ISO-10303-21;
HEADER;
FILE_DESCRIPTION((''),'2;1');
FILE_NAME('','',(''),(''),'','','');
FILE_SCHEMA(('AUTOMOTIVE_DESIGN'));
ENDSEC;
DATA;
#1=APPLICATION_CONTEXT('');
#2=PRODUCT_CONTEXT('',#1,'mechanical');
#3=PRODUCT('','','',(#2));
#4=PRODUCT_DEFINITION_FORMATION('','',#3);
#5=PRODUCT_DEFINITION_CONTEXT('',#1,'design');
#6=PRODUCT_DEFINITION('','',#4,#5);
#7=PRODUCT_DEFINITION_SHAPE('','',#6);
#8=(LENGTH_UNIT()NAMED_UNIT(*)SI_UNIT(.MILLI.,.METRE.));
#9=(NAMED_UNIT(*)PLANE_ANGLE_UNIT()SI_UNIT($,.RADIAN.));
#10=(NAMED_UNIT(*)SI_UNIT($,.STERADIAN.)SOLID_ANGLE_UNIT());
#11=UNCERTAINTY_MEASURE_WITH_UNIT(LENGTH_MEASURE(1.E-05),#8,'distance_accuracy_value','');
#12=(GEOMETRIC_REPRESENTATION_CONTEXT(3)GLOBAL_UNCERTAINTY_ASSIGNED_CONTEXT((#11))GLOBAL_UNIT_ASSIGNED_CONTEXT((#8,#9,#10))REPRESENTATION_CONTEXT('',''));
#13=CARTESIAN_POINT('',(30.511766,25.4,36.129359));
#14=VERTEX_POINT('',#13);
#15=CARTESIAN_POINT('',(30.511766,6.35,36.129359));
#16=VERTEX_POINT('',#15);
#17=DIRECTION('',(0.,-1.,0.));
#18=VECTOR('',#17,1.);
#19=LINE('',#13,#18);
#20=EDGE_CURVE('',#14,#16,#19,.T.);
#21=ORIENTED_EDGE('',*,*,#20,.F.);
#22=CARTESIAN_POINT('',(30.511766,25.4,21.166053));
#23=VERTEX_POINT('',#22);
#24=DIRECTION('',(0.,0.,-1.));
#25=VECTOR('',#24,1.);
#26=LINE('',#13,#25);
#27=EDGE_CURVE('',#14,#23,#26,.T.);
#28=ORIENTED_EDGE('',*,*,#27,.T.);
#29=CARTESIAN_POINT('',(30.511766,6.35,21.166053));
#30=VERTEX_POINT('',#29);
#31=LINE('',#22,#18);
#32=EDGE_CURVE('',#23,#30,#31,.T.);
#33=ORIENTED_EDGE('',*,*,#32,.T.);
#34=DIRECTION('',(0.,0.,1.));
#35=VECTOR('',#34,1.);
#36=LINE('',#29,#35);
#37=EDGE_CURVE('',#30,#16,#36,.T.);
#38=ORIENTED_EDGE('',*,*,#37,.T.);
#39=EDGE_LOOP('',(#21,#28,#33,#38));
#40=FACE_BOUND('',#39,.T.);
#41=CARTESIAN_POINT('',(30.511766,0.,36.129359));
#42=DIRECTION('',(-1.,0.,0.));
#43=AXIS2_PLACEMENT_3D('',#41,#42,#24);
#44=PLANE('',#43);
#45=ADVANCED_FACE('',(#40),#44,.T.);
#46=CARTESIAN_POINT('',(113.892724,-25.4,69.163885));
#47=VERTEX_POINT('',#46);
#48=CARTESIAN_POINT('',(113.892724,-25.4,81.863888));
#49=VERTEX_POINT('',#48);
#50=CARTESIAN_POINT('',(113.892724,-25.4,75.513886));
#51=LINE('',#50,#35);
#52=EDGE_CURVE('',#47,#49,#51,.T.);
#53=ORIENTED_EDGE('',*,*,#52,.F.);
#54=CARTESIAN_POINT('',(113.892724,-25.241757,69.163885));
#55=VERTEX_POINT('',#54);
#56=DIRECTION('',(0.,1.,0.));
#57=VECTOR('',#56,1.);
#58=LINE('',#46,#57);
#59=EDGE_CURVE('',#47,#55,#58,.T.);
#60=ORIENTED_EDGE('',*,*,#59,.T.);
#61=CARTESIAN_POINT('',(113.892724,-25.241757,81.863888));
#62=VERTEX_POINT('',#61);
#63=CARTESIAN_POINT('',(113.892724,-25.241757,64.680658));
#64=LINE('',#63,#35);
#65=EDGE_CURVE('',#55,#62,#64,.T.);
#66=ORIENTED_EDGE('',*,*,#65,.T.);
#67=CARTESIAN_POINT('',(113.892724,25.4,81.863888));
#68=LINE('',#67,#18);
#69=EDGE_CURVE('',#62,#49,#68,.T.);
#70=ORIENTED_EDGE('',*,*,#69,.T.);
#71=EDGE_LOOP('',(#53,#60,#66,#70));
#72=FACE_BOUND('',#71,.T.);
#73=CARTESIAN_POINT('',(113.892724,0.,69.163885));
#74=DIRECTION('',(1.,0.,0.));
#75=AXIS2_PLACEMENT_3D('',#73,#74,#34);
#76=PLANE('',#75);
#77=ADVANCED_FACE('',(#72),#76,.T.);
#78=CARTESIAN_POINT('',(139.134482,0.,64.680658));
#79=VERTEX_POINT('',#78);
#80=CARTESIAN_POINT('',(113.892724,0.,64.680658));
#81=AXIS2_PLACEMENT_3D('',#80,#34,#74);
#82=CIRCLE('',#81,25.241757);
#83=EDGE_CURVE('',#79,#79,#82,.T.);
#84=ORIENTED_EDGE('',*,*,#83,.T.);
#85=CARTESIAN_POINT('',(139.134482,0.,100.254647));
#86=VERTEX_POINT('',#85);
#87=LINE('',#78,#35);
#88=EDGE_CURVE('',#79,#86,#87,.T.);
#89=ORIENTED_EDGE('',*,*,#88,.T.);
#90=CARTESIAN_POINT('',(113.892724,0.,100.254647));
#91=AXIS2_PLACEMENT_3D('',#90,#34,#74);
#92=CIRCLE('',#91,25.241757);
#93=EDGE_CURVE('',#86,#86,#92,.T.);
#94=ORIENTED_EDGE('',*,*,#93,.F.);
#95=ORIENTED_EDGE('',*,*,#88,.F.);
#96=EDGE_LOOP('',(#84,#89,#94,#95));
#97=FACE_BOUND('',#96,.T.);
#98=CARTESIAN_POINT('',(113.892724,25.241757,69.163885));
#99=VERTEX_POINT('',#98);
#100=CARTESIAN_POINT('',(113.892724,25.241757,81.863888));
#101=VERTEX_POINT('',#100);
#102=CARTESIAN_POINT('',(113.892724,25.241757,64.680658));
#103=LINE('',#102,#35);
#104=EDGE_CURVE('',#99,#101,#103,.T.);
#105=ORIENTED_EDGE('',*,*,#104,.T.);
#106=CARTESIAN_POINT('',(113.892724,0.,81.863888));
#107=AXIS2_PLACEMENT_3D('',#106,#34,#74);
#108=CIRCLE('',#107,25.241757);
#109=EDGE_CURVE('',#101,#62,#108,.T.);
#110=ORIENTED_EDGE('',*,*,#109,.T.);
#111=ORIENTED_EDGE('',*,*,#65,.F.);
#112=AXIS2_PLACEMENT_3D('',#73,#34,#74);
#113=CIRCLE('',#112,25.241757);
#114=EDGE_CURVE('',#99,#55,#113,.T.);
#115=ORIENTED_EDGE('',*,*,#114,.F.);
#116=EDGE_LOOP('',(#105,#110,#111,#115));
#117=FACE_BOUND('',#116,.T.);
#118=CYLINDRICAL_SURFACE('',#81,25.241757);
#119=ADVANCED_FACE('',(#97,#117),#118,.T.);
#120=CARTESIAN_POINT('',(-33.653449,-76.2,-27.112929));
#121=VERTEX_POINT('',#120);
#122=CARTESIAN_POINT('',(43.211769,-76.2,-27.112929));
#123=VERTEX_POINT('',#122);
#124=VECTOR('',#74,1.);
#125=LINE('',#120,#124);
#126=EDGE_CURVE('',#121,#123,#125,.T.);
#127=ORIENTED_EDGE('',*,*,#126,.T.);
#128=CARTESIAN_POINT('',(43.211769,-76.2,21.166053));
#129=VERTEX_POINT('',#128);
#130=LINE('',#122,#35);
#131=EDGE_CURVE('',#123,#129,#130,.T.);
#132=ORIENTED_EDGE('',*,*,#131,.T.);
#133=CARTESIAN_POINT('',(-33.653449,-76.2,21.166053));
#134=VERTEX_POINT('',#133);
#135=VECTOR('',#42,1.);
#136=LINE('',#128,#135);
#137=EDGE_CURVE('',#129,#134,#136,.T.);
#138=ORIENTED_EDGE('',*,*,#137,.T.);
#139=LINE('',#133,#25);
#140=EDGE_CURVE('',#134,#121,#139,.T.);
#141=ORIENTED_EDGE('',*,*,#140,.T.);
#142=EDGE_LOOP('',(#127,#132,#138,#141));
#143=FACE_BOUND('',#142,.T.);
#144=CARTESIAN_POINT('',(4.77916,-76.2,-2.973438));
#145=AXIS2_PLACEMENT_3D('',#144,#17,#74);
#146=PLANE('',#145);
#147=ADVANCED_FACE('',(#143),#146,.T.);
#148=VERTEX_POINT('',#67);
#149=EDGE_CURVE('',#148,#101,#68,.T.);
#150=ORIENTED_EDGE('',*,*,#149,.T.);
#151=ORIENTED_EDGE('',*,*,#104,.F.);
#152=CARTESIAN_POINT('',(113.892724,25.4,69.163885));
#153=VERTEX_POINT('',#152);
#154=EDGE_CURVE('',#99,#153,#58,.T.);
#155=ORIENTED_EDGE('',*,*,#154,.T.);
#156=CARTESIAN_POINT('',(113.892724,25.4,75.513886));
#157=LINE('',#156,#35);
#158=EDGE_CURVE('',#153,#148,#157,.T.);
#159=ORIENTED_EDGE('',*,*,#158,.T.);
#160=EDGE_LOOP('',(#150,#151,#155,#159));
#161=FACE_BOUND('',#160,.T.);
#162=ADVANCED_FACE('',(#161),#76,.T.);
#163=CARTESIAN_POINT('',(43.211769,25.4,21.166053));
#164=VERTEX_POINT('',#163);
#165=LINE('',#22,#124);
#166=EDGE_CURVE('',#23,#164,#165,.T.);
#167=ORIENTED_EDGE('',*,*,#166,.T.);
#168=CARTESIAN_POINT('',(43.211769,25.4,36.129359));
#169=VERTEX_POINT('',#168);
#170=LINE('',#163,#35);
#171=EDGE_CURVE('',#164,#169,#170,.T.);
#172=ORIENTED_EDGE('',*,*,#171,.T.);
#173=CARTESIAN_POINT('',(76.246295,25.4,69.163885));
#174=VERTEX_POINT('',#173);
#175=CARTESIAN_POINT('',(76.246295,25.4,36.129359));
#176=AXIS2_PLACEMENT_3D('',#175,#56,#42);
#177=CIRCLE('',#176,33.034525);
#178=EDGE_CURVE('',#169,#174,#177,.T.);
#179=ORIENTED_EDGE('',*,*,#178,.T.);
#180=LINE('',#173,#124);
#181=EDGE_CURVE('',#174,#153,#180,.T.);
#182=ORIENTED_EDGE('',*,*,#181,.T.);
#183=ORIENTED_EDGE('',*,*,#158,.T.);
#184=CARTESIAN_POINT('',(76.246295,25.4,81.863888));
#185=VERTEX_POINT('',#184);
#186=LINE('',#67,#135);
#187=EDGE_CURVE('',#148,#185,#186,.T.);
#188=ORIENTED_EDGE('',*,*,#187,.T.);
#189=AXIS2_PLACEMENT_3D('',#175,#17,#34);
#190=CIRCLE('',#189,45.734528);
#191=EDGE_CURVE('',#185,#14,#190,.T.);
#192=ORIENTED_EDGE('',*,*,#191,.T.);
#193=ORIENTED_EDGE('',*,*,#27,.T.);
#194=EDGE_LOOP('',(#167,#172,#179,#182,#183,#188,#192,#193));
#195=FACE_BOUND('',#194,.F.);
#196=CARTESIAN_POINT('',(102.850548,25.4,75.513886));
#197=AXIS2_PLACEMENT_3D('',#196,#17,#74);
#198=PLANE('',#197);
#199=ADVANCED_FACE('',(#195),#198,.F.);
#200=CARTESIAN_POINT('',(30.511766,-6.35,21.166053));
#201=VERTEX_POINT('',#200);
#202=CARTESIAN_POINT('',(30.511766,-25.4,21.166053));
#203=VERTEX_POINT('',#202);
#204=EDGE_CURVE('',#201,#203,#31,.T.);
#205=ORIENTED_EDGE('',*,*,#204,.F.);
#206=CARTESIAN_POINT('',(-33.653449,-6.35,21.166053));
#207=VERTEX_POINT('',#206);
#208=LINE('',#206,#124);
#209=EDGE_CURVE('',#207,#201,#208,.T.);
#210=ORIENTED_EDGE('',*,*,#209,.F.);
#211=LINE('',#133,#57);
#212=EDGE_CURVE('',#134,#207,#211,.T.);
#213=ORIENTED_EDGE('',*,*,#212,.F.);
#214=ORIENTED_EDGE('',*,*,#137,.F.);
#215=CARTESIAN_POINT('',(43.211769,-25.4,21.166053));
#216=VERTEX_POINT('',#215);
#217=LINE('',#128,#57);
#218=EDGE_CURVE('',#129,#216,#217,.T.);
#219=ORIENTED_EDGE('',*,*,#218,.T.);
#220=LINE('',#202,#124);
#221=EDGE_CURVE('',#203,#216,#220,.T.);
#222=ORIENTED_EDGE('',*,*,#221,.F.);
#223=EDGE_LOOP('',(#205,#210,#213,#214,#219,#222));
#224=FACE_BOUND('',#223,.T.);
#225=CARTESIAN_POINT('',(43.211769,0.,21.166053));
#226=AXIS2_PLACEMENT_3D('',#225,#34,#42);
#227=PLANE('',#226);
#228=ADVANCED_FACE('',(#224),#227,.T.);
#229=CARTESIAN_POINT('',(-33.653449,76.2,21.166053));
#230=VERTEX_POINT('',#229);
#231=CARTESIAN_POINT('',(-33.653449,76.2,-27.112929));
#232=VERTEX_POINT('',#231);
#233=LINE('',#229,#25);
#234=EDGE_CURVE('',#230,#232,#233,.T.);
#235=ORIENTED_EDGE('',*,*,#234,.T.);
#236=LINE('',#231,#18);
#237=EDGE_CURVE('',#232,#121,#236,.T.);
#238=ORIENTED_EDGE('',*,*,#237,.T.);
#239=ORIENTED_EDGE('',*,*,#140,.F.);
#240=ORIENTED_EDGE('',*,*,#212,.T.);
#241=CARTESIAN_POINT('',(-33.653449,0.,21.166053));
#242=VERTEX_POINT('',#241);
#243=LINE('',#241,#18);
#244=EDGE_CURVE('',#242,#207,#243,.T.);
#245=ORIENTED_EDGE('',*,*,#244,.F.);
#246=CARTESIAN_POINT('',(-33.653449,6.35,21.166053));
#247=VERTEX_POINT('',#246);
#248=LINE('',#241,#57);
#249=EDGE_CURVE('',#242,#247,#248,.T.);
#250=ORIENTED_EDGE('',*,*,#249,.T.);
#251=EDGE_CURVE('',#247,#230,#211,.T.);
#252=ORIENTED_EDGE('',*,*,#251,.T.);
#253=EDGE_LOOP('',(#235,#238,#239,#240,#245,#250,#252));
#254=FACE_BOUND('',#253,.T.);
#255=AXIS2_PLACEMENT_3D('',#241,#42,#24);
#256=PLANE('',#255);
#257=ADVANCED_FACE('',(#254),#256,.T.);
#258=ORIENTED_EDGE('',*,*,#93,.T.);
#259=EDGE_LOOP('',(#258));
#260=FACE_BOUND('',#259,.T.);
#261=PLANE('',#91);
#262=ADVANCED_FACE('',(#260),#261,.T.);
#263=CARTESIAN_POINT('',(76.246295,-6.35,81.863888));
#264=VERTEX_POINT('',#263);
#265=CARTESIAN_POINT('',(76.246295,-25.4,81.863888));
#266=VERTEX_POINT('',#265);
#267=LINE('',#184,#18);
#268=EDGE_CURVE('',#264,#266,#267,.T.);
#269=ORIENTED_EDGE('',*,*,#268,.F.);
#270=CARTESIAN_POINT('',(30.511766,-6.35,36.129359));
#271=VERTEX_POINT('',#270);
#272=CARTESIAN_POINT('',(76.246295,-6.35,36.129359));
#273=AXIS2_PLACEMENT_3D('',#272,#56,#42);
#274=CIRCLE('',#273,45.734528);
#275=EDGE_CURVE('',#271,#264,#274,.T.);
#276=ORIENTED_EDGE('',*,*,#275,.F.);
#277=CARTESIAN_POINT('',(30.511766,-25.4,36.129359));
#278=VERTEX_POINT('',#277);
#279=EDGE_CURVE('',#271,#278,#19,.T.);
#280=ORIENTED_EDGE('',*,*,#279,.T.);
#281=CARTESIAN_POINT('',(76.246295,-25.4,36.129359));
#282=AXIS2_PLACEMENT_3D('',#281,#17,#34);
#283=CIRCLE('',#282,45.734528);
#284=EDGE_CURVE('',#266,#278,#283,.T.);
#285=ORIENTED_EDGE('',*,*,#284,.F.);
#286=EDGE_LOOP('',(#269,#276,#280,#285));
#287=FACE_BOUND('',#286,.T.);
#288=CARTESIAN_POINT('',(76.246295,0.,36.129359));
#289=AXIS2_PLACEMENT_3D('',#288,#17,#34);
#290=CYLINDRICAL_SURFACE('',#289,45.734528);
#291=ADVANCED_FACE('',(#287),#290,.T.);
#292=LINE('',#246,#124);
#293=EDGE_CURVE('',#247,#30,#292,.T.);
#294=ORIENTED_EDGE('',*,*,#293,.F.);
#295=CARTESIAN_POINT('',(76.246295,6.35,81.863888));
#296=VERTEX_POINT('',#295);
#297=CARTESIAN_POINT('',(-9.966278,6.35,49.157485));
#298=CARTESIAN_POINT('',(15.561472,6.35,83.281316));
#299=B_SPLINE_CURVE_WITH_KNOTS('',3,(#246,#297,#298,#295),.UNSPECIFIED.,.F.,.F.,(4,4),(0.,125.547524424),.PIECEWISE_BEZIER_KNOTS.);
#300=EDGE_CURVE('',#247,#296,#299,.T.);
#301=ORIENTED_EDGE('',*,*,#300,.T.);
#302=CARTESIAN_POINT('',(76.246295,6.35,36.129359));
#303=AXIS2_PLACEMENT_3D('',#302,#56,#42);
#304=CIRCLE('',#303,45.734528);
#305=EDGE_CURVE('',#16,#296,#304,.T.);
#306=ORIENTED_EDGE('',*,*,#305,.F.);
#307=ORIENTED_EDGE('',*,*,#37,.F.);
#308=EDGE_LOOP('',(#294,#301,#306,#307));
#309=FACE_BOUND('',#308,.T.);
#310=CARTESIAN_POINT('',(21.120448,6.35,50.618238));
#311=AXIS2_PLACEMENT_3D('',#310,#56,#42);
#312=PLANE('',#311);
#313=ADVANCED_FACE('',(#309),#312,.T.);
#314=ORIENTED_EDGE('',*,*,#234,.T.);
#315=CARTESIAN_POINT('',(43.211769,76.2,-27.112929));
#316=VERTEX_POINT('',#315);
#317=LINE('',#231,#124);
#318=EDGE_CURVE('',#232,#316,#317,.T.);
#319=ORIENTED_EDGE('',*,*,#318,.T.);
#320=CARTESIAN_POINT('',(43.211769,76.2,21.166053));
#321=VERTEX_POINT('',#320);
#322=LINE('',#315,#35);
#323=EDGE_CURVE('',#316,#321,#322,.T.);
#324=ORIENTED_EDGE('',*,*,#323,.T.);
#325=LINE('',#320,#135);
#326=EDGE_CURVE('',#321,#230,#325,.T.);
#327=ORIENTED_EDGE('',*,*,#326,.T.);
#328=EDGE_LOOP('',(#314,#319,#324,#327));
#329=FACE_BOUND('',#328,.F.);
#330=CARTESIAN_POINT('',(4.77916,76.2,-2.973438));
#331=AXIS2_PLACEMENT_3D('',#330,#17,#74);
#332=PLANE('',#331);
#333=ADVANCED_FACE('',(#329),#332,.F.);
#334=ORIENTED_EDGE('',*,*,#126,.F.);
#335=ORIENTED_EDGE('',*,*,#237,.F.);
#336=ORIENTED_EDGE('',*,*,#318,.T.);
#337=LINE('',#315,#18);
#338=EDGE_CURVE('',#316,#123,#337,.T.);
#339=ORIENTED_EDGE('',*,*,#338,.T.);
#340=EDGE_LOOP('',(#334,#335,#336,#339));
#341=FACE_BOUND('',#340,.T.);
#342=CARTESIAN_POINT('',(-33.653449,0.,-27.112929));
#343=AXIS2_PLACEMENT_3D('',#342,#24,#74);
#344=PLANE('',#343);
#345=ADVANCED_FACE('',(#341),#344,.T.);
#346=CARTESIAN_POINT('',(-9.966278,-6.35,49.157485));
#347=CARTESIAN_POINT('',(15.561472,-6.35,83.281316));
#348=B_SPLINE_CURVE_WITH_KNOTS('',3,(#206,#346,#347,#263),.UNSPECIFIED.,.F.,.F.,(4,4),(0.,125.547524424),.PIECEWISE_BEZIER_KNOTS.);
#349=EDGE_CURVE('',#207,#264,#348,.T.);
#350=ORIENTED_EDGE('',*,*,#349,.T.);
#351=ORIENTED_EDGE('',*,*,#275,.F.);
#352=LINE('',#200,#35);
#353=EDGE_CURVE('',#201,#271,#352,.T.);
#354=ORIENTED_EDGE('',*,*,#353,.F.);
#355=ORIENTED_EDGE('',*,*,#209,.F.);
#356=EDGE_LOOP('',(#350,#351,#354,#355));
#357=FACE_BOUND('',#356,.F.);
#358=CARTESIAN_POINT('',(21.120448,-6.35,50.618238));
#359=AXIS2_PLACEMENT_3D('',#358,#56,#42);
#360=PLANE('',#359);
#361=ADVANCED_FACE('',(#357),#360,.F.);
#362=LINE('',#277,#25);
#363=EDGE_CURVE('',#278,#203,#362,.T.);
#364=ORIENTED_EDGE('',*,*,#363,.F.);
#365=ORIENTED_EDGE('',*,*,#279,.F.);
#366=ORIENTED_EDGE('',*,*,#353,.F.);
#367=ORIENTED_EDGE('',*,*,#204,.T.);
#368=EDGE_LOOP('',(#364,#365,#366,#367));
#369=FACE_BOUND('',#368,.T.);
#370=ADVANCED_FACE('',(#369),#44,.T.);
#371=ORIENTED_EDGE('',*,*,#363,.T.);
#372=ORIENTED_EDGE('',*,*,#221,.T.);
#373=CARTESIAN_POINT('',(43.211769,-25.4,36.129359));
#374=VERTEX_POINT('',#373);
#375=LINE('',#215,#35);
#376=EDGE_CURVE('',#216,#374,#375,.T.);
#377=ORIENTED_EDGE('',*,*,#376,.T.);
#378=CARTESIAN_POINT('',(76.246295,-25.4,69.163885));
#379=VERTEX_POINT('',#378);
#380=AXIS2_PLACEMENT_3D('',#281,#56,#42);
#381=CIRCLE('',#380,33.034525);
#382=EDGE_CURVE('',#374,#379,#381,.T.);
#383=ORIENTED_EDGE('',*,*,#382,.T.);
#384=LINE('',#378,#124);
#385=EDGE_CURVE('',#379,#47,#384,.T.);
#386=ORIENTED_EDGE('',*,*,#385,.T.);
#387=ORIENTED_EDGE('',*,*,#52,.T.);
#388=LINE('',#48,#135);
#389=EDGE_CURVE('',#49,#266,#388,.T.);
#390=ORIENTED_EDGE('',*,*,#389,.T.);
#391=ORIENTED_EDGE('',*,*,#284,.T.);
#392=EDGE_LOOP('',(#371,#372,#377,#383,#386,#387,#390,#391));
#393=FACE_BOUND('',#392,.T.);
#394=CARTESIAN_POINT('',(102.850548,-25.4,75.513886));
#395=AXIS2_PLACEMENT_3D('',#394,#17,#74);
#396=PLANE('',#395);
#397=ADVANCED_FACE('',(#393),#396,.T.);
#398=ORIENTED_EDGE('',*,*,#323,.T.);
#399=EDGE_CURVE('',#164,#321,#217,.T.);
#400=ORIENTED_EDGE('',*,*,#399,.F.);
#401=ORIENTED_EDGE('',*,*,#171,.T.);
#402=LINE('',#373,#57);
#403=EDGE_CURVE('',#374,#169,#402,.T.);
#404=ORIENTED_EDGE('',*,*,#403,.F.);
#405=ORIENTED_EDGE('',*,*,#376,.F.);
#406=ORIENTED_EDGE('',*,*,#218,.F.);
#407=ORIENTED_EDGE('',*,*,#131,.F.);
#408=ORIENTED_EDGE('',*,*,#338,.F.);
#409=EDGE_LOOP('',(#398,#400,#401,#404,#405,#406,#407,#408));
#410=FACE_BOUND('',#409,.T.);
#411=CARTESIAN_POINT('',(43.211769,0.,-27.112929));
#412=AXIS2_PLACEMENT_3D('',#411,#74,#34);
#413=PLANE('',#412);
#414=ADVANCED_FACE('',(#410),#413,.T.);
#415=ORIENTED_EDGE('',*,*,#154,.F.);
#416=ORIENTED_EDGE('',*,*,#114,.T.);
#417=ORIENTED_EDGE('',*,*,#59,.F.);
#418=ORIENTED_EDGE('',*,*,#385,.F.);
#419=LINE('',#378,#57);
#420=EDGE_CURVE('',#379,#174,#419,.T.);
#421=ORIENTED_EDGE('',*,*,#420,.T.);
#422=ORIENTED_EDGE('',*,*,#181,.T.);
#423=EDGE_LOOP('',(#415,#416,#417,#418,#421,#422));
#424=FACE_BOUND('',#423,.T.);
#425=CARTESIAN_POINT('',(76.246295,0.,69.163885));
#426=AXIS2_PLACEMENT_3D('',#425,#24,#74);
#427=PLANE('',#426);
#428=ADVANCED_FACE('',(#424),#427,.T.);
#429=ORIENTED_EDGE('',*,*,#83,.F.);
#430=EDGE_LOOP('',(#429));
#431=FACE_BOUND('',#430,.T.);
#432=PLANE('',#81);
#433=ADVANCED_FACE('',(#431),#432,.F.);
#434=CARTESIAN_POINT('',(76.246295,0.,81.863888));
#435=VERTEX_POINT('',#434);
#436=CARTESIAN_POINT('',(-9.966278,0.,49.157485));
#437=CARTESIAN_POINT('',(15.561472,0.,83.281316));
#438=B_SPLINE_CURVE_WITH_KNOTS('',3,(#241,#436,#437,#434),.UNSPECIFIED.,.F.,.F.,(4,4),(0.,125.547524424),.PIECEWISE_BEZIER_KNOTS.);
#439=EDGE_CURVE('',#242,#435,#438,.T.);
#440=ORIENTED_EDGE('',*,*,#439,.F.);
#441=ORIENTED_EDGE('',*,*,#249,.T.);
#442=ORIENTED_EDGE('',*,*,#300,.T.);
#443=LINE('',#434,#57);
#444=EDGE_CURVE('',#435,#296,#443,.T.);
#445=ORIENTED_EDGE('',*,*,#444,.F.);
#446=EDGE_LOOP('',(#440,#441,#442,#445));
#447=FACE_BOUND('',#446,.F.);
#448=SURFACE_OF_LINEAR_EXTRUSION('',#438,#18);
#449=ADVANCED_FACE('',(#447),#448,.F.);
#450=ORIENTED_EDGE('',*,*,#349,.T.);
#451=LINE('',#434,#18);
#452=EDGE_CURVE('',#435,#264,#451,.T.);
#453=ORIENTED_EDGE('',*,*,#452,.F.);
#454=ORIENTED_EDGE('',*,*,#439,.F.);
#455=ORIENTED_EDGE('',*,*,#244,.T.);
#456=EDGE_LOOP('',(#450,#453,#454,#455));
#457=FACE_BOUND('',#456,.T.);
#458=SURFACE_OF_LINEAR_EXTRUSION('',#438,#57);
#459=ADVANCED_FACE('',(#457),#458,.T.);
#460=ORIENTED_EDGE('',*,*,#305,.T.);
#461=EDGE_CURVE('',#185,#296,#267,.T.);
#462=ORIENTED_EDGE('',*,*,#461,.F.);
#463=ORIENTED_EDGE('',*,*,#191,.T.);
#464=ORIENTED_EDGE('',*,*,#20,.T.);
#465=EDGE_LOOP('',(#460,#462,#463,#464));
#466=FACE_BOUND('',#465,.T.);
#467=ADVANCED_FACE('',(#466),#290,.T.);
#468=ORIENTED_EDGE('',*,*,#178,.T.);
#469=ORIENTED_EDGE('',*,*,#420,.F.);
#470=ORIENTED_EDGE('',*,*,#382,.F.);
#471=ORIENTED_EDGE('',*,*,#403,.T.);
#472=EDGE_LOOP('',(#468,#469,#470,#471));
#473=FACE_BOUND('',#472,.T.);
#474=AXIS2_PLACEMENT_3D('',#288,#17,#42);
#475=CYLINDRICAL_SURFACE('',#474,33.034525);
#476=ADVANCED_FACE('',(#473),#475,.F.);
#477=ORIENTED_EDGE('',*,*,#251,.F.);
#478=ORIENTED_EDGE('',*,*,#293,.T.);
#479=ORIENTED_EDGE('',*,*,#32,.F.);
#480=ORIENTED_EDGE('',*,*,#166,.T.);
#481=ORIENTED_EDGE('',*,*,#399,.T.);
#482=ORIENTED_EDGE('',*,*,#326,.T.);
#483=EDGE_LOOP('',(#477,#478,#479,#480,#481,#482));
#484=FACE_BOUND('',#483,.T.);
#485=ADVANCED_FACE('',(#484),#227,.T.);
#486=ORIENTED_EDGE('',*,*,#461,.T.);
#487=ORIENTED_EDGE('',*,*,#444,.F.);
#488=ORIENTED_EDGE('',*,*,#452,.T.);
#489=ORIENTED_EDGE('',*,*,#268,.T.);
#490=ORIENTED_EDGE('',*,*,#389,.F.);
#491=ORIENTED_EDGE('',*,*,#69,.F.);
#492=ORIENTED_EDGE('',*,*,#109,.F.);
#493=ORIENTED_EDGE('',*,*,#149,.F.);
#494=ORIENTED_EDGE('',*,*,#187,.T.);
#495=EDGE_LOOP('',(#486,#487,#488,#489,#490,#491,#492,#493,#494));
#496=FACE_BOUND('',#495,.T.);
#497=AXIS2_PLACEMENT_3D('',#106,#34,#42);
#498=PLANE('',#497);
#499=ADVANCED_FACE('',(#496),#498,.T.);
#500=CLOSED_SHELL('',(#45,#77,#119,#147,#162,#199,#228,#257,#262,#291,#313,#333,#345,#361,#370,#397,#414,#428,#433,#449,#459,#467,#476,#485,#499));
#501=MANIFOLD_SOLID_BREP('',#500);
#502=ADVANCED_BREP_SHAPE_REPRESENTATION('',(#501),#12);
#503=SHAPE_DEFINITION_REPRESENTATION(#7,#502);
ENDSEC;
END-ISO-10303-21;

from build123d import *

# Parameters (mm, degrees)
F1_DEPTH = 76.2
F0_W     = 22.0843532517
F0_H     = 12.7000030306
F2_DEPTH = 25.4
F4_DEPTH = 6.35


# Not quite as in the source:
# - the program builds the solid bodies; features that only make, move or delete a surface that nothing else refers to are left out


with BuildPart() as f1:
    # F0 (on Front) → F1 (new body, symmetric)
    with BuildSketch(Plane.XZ):
        Polygon((30.5117662821, 21.1660526693), (-33.6534492671, 21.1660526693), (-33.6534492671, -27.1129291505), (43.2117693126, -27.1129291505), (43.2117693126, 21.1660526693), align=None)
    extrude(amount=F1_DEPTH, both=True)

    # F0 (on Front) → F2 (join, symmetric)
    with BuildSketch(Plane.XZ):
        with Locations((102.8505478717, 75.5138860928)):
            Rectangle(F0_W, F0_H)
        with BuildLine():
            Line((30.5117662821, 36.1293591958), (30.5117662821, 21.1660526693))
            Line((30.5117662821, 21.1660526693), (43.2117693126, 21.1660526693))
            Line((43.2117693126, 21.1660526693), (43.2117693126, 36.1293591958))
            ThreePointArc((43.2117693126, 36.1293591958), (52.8873577836, 59.4882961065), (76.2462946943, 69.1638845775))
            Line((76.2462946943, 69.1638845775), (91.8083712459, 69.1638845775))
            Line((91.8083712459, 69.1638845775), (91.8083712459, 81.8638876081))
            Line((91.8083712459, 81.8638876081), (76.2462946943, 81.8638876081))
            ThreePointArc((76.2462946943, 81.8638876081), (43.9070995196, 68.4685543705), (30.5117662821, 36.1293591958))
        make_face()
    extrude(amount=F2_DEPTH, both=True)

    # F0 (on Front) → F4 (join, symmetric)
    with BuildSketch(Plane.XZ):
        with BuildLine():
            add(Edge.make_bspline(
                [(-33.6534492671, 21.1660526693), (-9.9662784487, 49.1574853659), (15.5614716932, 83.2813158631), (76.2462946943, 81.8638876081)],
                knots=[0, 0, 0, 0, 125.5475244242, 125.5475244242, 125.5475244242, 125.5475244242], degree=3))
            Line((-33.6534492671, 21.1660526693), (30.5117662821, 21.1660526693))
            Line((30.5117662821, 21.1660526693), (30.5117662821, 36.1293591958))
            ThreePointArc((30.5117662821, 36.1293591958), (43.9070995196, 68.4685543705), (76.2462946943, 81.8638876081))
        make_face()
    extrude(amount=F4_DEPTH, both=True)

    # F0 (on Front) → F5 (revolve)
    with BuildSketch(Plane.XZ):
        Polygon((113.8927244975, 100.2546474338), (113.8927244975, 81.8638876081), (113.8927244975, 69.1638845775), (113.8927244975, 64.6806582808), (139.1344815493, 64.6806582808), (139.1344815493, 100.2546474338), align=None)
    revolve(axis=Axis((113.8927244975, 0, 84.7092660056), (0, 0, 1)))


solid = f1.part
